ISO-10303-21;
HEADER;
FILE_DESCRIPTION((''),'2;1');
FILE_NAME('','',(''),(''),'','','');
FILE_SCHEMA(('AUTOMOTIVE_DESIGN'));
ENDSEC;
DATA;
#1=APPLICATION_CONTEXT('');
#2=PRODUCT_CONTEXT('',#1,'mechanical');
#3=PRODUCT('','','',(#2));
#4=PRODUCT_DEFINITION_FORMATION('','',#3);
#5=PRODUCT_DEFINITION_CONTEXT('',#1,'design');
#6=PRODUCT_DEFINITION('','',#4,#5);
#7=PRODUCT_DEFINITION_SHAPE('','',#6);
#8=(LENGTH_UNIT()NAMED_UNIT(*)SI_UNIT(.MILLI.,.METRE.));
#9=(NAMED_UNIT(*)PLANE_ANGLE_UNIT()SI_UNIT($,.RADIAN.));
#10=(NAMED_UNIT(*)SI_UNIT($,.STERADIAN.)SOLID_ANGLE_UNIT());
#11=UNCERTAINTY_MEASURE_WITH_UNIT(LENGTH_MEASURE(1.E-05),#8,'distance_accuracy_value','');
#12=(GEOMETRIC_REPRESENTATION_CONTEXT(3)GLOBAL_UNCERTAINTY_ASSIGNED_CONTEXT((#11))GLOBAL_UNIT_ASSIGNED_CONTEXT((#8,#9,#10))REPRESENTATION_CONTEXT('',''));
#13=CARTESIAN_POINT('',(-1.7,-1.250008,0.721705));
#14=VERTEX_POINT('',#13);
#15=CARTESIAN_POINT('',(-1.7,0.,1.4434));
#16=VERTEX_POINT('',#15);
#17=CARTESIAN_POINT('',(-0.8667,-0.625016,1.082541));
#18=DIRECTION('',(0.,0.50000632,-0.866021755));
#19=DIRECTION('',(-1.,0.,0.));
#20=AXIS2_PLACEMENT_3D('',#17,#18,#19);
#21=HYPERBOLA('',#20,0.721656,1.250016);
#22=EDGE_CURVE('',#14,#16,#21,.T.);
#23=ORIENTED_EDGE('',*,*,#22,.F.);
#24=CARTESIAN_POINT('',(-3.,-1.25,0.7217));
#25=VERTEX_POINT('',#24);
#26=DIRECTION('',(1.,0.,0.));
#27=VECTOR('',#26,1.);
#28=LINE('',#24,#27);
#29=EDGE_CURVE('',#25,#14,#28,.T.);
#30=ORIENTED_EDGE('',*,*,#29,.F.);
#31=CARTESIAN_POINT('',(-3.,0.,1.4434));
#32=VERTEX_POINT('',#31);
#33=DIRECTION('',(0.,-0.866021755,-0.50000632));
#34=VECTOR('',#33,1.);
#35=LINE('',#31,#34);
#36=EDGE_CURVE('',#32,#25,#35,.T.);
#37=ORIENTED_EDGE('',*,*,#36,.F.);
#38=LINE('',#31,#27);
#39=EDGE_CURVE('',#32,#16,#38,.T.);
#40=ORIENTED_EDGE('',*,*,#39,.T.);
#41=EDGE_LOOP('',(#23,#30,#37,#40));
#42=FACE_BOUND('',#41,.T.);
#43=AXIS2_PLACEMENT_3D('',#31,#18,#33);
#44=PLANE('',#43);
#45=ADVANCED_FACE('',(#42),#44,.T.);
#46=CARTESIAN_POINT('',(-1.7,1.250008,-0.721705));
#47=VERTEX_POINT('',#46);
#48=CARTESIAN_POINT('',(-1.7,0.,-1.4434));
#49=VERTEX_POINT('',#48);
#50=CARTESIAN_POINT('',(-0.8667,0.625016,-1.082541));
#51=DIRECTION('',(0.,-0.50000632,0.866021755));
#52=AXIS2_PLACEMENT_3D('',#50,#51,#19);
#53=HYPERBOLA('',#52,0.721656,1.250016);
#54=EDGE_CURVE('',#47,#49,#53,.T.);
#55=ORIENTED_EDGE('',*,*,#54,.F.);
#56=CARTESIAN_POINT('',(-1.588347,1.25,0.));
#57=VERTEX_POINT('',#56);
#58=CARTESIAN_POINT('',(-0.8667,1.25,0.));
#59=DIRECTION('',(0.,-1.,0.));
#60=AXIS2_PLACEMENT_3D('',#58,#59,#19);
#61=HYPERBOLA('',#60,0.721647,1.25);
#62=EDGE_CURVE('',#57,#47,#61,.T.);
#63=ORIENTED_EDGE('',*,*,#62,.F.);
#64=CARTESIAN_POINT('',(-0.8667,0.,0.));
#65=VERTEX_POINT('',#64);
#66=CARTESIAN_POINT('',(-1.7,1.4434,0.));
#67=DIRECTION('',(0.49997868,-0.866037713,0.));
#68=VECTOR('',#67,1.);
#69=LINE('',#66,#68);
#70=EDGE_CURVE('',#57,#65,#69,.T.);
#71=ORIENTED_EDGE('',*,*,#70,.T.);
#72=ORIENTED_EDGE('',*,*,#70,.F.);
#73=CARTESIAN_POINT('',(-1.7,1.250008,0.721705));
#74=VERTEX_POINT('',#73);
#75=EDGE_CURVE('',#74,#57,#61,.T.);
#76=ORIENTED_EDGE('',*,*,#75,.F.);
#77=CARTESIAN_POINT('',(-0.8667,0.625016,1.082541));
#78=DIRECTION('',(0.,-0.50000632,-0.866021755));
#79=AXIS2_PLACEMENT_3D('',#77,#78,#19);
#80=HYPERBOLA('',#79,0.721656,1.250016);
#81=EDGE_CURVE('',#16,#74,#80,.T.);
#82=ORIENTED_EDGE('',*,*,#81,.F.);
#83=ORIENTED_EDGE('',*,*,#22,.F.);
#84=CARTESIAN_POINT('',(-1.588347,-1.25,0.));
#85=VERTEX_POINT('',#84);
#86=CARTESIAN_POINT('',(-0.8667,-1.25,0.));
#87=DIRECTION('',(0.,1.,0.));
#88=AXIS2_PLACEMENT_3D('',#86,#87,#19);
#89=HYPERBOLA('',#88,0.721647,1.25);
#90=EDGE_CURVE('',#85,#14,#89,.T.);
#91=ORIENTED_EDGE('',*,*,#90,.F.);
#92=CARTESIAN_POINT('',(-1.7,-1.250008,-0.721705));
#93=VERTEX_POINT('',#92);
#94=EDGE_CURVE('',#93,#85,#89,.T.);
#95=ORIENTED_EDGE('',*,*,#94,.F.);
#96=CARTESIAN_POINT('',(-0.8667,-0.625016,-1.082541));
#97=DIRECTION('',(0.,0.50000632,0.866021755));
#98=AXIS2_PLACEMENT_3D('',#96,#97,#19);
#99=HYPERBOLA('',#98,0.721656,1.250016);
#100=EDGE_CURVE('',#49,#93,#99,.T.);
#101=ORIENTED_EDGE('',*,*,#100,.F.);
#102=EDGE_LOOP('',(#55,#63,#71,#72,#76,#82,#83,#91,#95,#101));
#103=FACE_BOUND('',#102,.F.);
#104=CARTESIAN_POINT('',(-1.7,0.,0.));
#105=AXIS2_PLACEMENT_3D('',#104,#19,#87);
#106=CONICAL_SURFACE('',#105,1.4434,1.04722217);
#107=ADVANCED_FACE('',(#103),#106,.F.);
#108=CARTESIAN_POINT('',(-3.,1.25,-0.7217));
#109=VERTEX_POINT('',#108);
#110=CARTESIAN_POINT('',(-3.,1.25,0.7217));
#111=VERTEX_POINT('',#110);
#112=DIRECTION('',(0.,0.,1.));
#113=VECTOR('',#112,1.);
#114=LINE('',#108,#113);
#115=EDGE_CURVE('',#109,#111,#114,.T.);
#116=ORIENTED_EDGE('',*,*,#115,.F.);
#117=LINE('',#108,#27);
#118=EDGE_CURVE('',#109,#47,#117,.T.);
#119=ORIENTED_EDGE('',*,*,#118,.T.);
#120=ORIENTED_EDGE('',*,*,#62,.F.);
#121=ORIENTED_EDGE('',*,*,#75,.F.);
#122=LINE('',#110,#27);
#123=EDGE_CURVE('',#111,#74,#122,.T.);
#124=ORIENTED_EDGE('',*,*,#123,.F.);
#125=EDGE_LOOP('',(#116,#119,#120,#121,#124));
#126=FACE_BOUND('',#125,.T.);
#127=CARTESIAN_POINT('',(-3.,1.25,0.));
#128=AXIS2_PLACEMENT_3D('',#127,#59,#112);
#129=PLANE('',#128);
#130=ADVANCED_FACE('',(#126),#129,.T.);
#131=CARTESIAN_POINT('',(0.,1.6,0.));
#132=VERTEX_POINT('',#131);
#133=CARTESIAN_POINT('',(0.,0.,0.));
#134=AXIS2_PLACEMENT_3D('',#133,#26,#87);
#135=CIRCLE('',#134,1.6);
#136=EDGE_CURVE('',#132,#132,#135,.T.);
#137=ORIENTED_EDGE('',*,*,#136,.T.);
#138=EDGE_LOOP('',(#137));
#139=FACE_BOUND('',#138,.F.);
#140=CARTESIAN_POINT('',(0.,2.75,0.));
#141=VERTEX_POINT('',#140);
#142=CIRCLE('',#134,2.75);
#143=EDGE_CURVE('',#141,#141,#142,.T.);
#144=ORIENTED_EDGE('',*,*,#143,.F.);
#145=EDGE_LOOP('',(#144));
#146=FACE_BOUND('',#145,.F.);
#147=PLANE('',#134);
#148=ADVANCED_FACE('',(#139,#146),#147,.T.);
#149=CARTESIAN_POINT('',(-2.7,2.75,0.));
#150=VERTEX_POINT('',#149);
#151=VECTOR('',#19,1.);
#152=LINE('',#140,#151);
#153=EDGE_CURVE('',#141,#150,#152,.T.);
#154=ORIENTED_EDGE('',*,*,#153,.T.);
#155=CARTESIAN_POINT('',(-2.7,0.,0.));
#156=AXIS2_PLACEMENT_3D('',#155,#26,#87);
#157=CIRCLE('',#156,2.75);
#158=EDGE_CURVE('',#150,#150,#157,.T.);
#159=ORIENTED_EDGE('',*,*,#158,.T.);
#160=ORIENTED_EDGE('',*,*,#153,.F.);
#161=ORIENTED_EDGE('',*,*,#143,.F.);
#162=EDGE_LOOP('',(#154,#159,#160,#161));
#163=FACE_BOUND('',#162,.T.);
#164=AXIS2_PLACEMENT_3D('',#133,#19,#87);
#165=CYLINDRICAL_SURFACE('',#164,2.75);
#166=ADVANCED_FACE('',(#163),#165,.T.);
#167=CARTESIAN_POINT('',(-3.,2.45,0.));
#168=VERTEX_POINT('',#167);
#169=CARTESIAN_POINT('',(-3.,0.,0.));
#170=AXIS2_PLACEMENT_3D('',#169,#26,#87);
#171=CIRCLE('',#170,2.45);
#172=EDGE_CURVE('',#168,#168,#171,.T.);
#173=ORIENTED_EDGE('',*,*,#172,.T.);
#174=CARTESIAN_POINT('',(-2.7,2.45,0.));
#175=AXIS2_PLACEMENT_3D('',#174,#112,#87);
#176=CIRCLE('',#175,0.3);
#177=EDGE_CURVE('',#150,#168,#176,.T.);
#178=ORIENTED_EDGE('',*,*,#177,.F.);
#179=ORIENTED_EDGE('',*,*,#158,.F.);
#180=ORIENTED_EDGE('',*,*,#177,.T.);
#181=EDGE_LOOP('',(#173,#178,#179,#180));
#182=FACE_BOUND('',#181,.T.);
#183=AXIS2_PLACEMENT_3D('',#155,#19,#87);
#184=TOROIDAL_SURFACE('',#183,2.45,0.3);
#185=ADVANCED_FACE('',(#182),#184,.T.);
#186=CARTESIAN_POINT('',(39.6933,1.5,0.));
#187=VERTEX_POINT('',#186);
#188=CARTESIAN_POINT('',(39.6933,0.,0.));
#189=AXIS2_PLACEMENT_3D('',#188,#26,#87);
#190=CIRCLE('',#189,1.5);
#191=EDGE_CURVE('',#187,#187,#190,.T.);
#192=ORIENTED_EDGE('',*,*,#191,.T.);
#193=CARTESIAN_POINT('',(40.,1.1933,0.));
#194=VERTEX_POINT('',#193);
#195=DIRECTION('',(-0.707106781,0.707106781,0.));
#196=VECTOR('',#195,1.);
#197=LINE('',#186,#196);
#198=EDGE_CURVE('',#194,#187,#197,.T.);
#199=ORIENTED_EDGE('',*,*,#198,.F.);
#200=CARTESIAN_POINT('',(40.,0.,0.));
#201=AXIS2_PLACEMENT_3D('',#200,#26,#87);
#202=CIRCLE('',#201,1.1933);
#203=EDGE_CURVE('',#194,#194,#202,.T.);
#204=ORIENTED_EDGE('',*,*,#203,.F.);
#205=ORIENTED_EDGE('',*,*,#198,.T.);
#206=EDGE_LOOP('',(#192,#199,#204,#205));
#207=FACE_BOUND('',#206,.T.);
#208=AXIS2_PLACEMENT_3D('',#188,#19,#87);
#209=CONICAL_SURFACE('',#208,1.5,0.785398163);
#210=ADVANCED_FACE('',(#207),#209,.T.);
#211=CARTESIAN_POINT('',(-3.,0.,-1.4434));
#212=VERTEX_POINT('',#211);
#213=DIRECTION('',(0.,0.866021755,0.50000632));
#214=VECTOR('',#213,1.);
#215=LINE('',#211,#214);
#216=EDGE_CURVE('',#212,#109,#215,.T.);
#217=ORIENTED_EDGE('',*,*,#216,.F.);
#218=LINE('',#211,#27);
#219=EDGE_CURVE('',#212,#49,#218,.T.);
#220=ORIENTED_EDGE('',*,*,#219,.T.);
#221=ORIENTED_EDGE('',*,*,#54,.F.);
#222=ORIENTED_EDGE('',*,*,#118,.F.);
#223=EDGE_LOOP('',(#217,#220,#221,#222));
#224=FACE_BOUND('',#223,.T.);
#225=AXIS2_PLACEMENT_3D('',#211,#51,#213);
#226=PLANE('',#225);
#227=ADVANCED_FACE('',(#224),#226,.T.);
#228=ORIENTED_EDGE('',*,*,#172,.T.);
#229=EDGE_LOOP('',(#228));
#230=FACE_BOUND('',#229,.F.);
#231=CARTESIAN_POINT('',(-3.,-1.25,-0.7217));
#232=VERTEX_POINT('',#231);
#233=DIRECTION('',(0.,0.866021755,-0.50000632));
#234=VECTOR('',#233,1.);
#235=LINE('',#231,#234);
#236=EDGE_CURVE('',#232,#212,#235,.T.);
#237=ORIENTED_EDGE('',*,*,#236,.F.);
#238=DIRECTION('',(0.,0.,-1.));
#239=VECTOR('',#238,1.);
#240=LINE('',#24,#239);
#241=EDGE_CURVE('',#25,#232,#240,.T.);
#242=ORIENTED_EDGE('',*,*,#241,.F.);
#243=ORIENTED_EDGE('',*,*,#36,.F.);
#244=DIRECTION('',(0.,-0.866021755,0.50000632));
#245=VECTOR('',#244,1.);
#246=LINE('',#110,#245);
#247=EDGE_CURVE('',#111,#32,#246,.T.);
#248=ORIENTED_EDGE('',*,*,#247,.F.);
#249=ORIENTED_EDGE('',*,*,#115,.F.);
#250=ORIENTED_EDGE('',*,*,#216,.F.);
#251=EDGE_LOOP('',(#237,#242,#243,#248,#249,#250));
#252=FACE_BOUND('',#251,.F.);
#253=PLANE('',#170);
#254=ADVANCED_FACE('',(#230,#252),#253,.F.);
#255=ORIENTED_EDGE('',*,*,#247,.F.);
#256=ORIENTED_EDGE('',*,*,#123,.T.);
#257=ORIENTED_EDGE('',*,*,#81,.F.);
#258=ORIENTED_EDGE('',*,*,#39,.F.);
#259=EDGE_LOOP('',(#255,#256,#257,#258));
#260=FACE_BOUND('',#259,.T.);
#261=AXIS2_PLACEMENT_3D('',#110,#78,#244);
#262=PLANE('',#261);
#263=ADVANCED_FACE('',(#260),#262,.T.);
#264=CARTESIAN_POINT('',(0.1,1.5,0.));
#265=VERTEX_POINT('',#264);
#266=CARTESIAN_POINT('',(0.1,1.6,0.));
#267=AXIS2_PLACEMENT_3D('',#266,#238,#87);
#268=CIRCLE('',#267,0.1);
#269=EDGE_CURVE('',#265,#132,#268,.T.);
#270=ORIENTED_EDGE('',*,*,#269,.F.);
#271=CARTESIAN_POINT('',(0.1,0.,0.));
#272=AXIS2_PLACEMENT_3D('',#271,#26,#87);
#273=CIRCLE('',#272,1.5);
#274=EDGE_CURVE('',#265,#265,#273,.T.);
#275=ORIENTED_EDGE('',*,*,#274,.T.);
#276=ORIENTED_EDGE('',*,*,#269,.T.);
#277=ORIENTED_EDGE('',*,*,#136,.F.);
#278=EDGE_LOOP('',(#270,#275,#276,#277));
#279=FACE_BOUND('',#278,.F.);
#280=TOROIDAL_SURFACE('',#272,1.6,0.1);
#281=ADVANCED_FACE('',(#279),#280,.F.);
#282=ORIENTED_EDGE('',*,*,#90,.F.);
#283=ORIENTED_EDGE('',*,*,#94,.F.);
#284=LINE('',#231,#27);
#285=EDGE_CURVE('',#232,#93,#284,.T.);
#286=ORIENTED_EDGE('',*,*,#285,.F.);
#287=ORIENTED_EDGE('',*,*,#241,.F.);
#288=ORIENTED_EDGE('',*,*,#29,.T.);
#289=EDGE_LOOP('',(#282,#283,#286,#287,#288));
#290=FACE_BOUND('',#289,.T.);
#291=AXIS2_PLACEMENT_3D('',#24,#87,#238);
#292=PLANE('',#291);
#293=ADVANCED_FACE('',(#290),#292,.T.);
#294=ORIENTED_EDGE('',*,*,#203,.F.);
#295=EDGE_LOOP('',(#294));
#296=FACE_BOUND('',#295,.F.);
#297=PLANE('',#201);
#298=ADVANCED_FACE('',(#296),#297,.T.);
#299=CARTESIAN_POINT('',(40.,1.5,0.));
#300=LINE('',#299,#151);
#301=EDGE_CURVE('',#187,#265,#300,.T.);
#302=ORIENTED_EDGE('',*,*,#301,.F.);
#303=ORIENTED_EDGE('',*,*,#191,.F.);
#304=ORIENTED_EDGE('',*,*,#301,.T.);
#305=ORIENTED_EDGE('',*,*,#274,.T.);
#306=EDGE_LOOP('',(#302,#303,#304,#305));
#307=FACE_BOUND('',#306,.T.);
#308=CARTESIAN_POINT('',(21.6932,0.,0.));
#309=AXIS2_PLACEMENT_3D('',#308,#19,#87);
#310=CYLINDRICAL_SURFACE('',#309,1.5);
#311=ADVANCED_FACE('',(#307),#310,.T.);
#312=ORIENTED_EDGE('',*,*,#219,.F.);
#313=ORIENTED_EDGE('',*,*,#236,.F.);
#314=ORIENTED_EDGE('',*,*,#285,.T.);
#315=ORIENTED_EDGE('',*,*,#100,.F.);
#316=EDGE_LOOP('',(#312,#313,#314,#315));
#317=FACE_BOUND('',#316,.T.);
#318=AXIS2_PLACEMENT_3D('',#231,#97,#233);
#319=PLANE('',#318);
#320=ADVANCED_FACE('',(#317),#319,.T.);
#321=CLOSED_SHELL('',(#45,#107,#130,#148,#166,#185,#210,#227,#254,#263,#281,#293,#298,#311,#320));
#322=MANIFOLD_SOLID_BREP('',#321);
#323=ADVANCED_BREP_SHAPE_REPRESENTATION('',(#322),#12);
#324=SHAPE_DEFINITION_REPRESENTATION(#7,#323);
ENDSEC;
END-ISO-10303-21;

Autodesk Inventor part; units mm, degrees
ref_plane "YZ Plane" through (0, 0, 0) normal (1, 0, 0) x (0, 1, 0)
ref_plane "XZ Plane" through (0, 0, 0) normal (0, 1, 0) x (-1, 0, 0)
sketch "Sketch1" plane through (0, 0, 0) normal (0, 0, 1) x (1, 0, 0)
  line L0 (-0.8667, 0) -> (40, 0)
  line L1 (40, 0) -> (40, 1.5)
  line L2 (40, 1.5) -> (22, 1.5)
  line L3 (22, 1.5) -> (21.6932, 1.5)
  line L4 (21.6932, 1.5) -> (0, 1.5)
  line L5 (0, 1.5) -> (0, 2.75)
  line L6 (0, 2.75) -> (-3, 2.75)
  line L7 (-3, 2.75) -> (-3, 1.4434)
  line L8 (-3, 1.4434) -> (-1.7, 1.4434)
  line L9 (-1.7, 1.4434) -> (-0.8667, 0)
  line L10 (-9.6, 0) -> (36.6, 0) projected
  line L11 (0, -0.55) -> (0, 3.3) projected
  line L12 (22, 1.5) -> (0, 1.5) construction
  dimension "d1" = 18
  dimension "d2" = 0.3068
  dimension "d3" = 3
  dimension "d4" = 1.3
  dimension "d5" = 60
  dimension "d6" = 3
  dimension "d7" = 3
  dimension "d8" = 2.8868
  dimension "d9" = 5.5
  dimension "d26" = 40
revolve "Body" add sketch "Sketch1" angle 360 about axis through (-0.8667, 0, 0) along (1, 0, 0)
sketch "Sketch2" plane through (-3, 0, 0) normal (-1, 0, 0) x (0, 0, 1)
  circle A0 centre (0, 0) radius 1.4434 projected
  line L0 (0, -3.85) -> (0, 3.85) projected
  line L1 (-3.85, 0) -> (3.85, 0) projected
  line L2 (1.4434, 0) -> (0.7217, -1.25)
  line L3 (0.7217, -1.25) -> (-0.7217, -1.25)
  line L4 (-0.7217, -1.25) -> (-1.4434, 0)
  line L5 (-1.4434, 0) -> (-0.7217, 1.25)
  line L6 (-0.7217, 1.25) -> (0.7217, 1.25)
  line L7 (0.7217, 1.25) -> (1.4434, 0)
extrude "Slot" add sketch "Sketch2" against normal up to next contours L7 A0 | A0 L2 | L6 L0 A0 | A0 L0 L3 | L0 L6 A0 | A0 L3 L0 | L4 A0 | A0 L5
fillet "Fillet1" radius 0.3 1 edges at (-3, -2.75, 0)
thread "Thread" size "M3x0.5" class "6g" standard "ISO Metric profile" length 18
chamfer "Chamfer1" distance 0.3067 distance2 0.3067 1 edges at (40, -1.5, 0) measured on face at (40, -0.1088, 0.5667)
ref_plane "Work Plane1" through (29, 0, 0) normal (0, -1, 0) x (1, 0, 0)
fillet "Fillet2" radius 0.1 1 edges at (0, -1.5, 0)
equation "\"d30\" = R"
equation "\"d17\" = RR"
equation "\"d13\" = GEL"
equation "\"d15\" = -0.5 * SPD + 0.5 * GD"
equation "\"d16\" = GUL"
equation "\"d1\" = GEL"
equation "\"d3\" = KOH"
equation "\"d4\" = INTI"
equation "\"d6\" = GD"
equation "\"d7\" = BDM"
equation "\"d8\" = 1.1547 * SW"
equation "\"d9\" = KOD"
equation "\"d26\" = NLG"
equation "\"GD\" = NND"
equation "\"NLG\" = 40"
equation "\"GEL\" = 18"
equation "\"KOD\" = 5.5"
equation "\"KOH\" = 3"
equation "\"INTI\" = 1.3"
equation "\"GAL\" = 0.61345 * PTC"
equation "\"GUL\" = 0.61345 * PTC"
equation "\"BDM\" = NND"
equation "\"SW\" = 2.5"
equation "\"RR\" = 0.3"
equation "\"SPD\" = NND - 1.2269 * PTC"
equation "\"R\" = 0.1"
equation "\"TOA\" = 30deg"
equation "\"GD1\" = THREADDIA - 1.2269 * PTC"
equation "\"THREADDIA\" = 3"
equation "\"FAWI\" = 45deg"
equation "\"ANG\" = 120deg"
equation "\"PTC\" = 0.5"
equation "\"NND\" = 3"
equation "\"E0\" = 1.155 * SW"
properties part number "DIN 912 - M3 x 40" material "Steel, Mild"
